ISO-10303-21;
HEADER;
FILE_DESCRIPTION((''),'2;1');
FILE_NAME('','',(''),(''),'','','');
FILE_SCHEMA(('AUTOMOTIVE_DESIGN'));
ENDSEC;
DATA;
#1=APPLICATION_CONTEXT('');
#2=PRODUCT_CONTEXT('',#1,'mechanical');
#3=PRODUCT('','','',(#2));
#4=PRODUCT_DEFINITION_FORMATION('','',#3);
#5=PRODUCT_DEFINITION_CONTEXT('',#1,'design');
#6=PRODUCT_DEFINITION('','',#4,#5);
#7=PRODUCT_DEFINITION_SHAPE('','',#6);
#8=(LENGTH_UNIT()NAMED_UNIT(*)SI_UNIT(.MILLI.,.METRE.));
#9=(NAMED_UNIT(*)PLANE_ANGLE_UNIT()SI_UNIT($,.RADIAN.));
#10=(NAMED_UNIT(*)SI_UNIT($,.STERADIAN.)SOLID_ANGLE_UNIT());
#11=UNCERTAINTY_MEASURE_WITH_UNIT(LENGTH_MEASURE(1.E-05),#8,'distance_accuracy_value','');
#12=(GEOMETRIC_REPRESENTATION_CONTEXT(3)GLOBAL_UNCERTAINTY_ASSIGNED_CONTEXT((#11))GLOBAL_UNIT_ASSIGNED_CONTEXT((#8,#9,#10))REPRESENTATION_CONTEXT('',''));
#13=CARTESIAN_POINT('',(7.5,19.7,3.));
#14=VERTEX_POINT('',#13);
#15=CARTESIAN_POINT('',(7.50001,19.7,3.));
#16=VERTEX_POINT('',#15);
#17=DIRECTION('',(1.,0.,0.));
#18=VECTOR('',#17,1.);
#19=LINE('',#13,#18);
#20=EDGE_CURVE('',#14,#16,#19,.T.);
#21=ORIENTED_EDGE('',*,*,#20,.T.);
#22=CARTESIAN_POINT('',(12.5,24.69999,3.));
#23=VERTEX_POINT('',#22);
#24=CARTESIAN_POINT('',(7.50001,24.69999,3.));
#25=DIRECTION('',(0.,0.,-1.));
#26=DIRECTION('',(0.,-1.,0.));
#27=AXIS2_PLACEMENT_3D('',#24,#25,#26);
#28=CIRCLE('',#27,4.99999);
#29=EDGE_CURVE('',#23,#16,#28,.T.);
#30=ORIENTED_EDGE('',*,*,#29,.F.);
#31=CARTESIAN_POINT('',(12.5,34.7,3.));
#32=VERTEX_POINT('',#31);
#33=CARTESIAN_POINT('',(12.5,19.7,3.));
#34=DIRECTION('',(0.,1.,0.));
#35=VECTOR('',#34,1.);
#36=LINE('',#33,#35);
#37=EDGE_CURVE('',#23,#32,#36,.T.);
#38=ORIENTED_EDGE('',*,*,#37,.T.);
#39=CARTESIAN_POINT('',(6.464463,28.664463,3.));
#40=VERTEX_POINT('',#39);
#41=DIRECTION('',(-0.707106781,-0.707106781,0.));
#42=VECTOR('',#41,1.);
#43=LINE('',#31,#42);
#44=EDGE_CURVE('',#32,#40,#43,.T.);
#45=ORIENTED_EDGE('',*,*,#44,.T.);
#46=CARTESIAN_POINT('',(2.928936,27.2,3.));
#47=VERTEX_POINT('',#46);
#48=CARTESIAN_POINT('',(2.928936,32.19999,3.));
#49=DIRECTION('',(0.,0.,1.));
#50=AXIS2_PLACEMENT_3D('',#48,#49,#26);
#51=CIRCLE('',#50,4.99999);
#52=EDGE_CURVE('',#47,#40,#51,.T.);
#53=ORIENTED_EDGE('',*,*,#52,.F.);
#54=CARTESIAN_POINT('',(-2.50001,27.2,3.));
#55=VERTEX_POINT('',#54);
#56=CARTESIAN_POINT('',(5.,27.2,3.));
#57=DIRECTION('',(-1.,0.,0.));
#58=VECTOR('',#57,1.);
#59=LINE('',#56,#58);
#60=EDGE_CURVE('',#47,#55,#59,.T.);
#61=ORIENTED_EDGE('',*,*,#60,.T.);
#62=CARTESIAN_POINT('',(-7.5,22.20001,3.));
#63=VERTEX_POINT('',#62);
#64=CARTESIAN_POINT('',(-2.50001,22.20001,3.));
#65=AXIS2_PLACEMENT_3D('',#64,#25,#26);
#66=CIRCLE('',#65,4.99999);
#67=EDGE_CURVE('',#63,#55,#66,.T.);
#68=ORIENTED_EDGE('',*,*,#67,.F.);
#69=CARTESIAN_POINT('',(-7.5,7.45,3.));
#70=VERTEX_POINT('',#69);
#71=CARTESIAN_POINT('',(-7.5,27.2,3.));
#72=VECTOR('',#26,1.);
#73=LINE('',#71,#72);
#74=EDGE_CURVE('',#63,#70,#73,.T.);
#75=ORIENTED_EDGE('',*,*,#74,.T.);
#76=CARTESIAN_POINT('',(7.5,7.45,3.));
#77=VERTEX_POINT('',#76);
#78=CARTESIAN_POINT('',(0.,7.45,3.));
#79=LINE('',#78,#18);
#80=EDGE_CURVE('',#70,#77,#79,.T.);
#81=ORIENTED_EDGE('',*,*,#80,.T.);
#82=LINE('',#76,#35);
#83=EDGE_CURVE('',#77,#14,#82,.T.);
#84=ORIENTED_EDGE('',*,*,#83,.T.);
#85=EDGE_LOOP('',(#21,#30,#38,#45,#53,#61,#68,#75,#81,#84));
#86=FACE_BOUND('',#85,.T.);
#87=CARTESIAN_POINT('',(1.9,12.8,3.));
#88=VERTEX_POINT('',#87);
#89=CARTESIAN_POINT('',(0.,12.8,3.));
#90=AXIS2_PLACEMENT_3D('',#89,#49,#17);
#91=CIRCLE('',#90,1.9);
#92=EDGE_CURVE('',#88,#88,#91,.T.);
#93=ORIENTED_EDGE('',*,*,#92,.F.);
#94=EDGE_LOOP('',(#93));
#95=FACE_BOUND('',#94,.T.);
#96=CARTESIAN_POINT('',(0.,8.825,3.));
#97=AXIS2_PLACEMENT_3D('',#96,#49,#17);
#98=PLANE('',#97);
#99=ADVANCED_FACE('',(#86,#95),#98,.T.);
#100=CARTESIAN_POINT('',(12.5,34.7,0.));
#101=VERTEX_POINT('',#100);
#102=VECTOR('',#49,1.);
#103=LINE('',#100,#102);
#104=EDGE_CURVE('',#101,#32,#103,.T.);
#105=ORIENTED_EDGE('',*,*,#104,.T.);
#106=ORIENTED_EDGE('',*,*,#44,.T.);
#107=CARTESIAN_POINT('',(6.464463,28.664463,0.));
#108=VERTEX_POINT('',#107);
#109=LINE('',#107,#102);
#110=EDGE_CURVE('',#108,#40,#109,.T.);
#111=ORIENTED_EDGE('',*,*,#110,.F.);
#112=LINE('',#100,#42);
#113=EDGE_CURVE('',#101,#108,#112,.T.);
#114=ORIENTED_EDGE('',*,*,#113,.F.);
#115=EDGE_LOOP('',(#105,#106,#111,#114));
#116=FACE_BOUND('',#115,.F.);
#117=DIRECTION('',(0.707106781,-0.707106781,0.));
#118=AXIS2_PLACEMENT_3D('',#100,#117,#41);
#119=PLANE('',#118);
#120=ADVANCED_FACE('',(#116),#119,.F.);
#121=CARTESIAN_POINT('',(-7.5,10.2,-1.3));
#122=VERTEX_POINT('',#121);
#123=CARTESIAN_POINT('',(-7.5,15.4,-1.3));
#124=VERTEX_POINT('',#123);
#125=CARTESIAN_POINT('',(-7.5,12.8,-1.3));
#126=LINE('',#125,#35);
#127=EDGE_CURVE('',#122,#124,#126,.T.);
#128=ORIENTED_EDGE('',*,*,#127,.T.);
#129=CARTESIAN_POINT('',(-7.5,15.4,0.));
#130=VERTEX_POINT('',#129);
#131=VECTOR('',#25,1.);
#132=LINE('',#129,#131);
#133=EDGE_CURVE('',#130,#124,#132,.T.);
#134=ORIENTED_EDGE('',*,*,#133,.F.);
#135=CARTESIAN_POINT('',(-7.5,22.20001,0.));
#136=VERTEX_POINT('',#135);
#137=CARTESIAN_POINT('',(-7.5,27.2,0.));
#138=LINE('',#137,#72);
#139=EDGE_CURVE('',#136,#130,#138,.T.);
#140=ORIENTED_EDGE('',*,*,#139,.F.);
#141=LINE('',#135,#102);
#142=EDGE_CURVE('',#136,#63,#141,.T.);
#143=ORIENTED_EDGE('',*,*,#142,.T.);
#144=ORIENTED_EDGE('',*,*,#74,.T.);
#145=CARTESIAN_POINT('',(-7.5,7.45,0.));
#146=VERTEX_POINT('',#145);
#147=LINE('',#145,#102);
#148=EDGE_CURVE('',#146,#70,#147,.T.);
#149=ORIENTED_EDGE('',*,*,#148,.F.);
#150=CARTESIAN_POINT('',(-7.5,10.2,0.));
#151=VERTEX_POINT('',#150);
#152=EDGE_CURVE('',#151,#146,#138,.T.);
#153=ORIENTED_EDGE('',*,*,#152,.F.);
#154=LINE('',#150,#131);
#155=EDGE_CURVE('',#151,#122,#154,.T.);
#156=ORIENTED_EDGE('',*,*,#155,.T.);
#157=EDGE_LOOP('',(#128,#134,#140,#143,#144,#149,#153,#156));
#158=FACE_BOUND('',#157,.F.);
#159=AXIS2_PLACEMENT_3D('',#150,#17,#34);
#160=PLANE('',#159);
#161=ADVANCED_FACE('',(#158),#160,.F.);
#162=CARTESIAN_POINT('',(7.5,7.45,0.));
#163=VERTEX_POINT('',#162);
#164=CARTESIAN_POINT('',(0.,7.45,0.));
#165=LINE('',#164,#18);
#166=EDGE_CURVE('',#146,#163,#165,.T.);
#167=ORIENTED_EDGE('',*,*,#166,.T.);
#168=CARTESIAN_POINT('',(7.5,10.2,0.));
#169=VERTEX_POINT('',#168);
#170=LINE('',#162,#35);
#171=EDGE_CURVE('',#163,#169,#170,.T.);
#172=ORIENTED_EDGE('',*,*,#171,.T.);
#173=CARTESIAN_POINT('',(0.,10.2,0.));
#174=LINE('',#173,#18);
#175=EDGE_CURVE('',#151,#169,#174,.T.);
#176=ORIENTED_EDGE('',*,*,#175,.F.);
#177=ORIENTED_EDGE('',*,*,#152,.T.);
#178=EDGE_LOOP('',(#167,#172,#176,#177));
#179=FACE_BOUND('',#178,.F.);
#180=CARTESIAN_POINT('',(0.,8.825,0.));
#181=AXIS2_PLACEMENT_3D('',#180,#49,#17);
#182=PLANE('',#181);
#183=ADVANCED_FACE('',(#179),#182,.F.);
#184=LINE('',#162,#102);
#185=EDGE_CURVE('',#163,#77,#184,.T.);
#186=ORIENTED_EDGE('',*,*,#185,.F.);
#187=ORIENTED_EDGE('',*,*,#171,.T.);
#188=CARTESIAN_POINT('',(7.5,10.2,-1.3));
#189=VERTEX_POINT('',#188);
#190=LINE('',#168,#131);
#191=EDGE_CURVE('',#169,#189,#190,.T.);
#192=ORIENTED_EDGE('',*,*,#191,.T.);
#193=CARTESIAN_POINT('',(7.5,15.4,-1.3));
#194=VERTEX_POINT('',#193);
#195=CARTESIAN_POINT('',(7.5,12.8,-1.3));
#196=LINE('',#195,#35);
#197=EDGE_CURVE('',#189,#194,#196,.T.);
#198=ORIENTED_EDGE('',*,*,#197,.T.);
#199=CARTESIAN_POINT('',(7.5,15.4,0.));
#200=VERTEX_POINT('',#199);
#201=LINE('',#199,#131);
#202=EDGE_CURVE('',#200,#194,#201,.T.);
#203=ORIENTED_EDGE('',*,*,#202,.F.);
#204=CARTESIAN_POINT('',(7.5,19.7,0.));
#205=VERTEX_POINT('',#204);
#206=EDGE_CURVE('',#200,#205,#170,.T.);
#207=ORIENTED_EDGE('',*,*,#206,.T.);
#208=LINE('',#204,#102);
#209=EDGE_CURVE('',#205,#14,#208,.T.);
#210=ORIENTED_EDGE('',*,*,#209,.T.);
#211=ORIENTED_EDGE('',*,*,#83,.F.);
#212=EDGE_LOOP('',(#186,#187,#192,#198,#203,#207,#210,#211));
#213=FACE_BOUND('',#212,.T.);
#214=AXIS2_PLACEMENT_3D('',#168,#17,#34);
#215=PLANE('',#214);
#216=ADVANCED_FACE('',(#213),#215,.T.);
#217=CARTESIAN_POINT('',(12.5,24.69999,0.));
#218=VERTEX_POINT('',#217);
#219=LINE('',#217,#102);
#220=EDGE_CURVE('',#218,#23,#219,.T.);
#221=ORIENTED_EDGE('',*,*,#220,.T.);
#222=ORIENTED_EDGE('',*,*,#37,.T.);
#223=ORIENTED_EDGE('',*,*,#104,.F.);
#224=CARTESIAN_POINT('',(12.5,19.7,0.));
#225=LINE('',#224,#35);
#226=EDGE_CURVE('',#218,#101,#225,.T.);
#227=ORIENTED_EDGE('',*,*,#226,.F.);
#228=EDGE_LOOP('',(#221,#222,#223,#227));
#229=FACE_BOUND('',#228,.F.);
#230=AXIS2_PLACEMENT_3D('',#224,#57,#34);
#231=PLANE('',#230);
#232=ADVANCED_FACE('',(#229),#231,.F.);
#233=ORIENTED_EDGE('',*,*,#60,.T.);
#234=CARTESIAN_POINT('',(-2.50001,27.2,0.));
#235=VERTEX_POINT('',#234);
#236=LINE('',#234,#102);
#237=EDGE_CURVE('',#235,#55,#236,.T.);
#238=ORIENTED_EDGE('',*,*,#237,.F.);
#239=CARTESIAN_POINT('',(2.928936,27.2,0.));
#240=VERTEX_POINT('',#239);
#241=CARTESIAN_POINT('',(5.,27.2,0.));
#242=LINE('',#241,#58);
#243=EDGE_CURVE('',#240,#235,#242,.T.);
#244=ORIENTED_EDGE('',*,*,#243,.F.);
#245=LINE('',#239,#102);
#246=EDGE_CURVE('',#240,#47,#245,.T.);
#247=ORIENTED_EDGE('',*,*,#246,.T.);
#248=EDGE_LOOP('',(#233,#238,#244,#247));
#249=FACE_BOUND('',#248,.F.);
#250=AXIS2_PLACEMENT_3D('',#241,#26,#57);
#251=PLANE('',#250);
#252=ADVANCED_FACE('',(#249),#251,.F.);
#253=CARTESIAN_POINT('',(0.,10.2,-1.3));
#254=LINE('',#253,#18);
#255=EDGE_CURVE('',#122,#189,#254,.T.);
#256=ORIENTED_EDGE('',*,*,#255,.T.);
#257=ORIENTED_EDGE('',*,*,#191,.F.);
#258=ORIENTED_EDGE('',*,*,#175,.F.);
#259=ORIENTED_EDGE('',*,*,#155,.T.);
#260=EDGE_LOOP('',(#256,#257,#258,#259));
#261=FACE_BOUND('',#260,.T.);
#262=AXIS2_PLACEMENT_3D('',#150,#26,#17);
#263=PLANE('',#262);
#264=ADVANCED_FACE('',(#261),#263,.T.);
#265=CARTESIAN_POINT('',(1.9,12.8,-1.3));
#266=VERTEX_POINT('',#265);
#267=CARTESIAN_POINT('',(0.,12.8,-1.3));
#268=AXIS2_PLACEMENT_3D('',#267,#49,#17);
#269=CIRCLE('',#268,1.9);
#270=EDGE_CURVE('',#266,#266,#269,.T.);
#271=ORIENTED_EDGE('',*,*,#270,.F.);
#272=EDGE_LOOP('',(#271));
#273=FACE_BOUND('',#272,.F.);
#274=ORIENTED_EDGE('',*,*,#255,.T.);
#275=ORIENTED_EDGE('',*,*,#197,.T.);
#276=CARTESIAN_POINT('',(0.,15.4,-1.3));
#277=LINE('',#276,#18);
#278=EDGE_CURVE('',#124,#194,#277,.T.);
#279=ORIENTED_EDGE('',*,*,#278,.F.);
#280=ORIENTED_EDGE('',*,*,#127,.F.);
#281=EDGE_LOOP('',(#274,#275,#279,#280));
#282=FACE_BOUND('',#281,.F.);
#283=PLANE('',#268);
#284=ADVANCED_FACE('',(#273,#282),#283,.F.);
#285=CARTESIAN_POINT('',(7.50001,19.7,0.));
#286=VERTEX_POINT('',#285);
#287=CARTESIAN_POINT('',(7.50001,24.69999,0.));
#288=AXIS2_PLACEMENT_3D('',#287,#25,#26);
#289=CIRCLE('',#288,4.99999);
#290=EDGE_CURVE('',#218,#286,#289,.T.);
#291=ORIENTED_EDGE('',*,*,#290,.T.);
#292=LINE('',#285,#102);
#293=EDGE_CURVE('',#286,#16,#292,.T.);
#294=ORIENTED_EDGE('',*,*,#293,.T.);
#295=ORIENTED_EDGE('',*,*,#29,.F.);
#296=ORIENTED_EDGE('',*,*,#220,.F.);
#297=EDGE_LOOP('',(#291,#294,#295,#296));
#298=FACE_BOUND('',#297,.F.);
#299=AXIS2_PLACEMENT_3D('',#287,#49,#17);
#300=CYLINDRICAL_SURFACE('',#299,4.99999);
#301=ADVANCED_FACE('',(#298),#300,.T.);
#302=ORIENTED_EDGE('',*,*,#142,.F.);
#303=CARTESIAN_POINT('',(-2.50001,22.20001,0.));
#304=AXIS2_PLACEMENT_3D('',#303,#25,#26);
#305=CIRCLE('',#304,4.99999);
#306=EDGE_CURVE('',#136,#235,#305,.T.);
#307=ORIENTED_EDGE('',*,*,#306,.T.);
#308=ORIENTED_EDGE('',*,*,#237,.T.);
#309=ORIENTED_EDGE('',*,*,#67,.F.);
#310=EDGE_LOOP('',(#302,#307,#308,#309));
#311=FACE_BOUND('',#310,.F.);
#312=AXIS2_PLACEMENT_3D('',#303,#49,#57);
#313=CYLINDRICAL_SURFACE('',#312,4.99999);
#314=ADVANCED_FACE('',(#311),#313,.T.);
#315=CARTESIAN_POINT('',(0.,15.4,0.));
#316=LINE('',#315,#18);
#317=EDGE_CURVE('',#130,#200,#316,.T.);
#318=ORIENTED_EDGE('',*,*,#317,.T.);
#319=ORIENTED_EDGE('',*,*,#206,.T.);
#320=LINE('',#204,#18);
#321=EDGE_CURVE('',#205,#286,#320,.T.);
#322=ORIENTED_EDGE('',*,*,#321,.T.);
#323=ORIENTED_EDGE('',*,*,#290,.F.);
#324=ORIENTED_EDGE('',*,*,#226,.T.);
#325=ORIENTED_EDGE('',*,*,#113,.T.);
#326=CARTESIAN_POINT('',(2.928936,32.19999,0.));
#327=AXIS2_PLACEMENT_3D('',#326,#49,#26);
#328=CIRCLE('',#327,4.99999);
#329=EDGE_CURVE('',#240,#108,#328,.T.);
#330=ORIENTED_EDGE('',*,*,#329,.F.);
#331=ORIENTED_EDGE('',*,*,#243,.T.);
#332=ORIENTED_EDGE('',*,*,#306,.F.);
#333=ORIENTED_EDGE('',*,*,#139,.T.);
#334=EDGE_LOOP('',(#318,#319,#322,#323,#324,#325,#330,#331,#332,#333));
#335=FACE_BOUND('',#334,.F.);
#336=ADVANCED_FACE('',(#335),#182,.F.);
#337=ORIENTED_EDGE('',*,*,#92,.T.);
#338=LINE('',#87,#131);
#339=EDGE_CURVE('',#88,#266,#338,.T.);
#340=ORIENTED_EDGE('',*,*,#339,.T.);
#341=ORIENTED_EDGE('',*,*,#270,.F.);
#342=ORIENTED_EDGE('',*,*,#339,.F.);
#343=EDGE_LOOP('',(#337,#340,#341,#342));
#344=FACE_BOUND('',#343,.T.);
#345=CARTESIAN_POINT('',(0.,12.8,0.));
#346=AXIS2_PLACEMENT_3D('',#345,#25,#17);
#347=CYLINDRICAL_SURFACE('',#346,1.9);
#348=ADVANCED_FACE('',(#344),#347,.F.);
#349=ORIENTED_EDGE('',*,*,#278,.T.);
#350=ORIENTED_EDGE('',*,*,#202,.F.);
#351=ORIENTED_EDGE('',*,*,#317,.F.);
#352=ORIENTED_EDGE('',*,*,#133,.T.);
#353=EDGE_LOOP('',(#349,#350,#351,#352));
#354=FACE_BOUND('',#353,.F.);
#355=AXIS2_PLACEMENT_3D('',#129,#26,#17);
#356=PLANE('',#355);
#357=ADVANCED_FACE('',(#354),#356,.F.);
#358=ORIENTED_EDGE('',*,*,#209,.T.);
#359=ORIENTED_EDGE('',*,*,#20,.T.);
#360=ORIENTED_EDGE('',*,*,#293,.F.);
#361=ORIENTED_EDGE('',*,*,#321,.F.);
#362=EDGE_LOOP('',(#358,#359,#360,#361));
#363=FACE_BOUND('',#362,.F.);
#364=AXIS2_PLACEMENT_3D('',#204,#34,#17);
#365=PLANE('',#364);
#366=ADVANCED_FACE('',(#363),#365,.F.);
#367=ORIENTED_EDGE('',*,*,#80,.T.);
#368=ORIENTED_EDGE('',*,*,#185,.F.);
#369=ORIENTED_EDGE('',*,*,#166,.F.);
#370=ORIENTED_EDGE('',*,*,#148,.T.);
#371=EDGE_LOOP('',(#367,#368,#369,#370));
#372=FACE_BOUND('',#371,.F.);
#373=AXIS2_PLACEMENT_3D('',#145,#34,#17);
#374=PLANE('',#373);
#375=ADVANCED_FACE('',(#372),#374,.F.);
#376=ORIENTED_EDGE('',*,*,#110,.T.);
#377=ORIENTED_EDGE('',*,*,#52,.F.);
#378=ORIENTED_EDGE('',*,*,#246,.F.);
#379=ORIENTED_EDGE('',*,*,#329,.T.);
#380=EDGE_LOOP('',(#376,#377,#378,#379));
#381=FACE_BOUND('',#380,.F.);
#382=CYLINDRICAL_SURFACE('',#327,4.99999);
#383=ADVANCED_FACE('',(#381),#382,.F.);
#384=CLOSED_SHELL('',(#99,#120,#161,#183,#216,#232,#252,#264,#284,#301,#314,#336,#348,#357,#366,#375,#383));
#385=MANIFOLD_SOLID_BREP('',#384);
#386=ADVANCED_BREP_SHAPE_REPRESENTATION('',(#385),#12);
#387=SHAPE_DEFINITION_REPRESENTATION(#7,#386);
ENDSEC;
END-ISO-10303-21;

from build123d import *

# Parameters (mm, degrees)
F0_W     = 15
F0_H     = 2.75
F0_H_2   = 5.2
F0_R     = 1.9
F0_H_3   = 4.3
F1_DEPTH = 3
F2_DEPTH = 1.3
F3_R     = 4.99999


# Not quite as in the source:
# - a fillet or chamfer is up to 0.001 mm smaller than in the source, because OpenCascade refuses the exact size
# - a feature names something its author has since deleted; it is built from what else it names


with BuildPart() as f1:
    # F0 (on Top) → F1 (new body)
    with BuildSketch(Plane.XY):
        with Locations((0, 8.825)):
            Rectangle(F0_W, F0_H)
        with Locations((0, 12.8)):
            Rectangle(F0_W, F0_H_2)
        with Locations((0, 12.8)):
            Circle(F0_R, mode=Mode.SUBTRACT)
        with Locations((0, 17.55)):
            Rectangle(F0_W, F0_H_3)
        Polygon((-7.5, 27.2), (-7.5, 19.7), (7.5, 19.7), (12.5, 19.7), (12.5, 34.7), (5, 27.2), align=None)
    extrude(amount=F1_DEPTH)

    # F0 (on Top) → F2 (join)
    with BuildSketch(Plane.XY):
        with Locations((0, 12.8)):
            Rectangle(F0_W, F0_H_2)
        with Locations((0, 12.8)):
            Circle(F0_R, mode=Mode.SUBTRACT)
    extrude(amount=-F2_DEPTH)

    # F3 (radius 5 in the source; OpenCascade refuses exactly that, so slightly less here)
    f3_edges = [f1.edges().sort_by_distance(p)[0] for p in [
        (12.5, 19.7, 1.5),
        (-7.5, 27.2, 1.5),
        (5, 27.2, 1.5),
    ]]
    fillet(f3_edges, radius=F3_R)


solid = f1.part
